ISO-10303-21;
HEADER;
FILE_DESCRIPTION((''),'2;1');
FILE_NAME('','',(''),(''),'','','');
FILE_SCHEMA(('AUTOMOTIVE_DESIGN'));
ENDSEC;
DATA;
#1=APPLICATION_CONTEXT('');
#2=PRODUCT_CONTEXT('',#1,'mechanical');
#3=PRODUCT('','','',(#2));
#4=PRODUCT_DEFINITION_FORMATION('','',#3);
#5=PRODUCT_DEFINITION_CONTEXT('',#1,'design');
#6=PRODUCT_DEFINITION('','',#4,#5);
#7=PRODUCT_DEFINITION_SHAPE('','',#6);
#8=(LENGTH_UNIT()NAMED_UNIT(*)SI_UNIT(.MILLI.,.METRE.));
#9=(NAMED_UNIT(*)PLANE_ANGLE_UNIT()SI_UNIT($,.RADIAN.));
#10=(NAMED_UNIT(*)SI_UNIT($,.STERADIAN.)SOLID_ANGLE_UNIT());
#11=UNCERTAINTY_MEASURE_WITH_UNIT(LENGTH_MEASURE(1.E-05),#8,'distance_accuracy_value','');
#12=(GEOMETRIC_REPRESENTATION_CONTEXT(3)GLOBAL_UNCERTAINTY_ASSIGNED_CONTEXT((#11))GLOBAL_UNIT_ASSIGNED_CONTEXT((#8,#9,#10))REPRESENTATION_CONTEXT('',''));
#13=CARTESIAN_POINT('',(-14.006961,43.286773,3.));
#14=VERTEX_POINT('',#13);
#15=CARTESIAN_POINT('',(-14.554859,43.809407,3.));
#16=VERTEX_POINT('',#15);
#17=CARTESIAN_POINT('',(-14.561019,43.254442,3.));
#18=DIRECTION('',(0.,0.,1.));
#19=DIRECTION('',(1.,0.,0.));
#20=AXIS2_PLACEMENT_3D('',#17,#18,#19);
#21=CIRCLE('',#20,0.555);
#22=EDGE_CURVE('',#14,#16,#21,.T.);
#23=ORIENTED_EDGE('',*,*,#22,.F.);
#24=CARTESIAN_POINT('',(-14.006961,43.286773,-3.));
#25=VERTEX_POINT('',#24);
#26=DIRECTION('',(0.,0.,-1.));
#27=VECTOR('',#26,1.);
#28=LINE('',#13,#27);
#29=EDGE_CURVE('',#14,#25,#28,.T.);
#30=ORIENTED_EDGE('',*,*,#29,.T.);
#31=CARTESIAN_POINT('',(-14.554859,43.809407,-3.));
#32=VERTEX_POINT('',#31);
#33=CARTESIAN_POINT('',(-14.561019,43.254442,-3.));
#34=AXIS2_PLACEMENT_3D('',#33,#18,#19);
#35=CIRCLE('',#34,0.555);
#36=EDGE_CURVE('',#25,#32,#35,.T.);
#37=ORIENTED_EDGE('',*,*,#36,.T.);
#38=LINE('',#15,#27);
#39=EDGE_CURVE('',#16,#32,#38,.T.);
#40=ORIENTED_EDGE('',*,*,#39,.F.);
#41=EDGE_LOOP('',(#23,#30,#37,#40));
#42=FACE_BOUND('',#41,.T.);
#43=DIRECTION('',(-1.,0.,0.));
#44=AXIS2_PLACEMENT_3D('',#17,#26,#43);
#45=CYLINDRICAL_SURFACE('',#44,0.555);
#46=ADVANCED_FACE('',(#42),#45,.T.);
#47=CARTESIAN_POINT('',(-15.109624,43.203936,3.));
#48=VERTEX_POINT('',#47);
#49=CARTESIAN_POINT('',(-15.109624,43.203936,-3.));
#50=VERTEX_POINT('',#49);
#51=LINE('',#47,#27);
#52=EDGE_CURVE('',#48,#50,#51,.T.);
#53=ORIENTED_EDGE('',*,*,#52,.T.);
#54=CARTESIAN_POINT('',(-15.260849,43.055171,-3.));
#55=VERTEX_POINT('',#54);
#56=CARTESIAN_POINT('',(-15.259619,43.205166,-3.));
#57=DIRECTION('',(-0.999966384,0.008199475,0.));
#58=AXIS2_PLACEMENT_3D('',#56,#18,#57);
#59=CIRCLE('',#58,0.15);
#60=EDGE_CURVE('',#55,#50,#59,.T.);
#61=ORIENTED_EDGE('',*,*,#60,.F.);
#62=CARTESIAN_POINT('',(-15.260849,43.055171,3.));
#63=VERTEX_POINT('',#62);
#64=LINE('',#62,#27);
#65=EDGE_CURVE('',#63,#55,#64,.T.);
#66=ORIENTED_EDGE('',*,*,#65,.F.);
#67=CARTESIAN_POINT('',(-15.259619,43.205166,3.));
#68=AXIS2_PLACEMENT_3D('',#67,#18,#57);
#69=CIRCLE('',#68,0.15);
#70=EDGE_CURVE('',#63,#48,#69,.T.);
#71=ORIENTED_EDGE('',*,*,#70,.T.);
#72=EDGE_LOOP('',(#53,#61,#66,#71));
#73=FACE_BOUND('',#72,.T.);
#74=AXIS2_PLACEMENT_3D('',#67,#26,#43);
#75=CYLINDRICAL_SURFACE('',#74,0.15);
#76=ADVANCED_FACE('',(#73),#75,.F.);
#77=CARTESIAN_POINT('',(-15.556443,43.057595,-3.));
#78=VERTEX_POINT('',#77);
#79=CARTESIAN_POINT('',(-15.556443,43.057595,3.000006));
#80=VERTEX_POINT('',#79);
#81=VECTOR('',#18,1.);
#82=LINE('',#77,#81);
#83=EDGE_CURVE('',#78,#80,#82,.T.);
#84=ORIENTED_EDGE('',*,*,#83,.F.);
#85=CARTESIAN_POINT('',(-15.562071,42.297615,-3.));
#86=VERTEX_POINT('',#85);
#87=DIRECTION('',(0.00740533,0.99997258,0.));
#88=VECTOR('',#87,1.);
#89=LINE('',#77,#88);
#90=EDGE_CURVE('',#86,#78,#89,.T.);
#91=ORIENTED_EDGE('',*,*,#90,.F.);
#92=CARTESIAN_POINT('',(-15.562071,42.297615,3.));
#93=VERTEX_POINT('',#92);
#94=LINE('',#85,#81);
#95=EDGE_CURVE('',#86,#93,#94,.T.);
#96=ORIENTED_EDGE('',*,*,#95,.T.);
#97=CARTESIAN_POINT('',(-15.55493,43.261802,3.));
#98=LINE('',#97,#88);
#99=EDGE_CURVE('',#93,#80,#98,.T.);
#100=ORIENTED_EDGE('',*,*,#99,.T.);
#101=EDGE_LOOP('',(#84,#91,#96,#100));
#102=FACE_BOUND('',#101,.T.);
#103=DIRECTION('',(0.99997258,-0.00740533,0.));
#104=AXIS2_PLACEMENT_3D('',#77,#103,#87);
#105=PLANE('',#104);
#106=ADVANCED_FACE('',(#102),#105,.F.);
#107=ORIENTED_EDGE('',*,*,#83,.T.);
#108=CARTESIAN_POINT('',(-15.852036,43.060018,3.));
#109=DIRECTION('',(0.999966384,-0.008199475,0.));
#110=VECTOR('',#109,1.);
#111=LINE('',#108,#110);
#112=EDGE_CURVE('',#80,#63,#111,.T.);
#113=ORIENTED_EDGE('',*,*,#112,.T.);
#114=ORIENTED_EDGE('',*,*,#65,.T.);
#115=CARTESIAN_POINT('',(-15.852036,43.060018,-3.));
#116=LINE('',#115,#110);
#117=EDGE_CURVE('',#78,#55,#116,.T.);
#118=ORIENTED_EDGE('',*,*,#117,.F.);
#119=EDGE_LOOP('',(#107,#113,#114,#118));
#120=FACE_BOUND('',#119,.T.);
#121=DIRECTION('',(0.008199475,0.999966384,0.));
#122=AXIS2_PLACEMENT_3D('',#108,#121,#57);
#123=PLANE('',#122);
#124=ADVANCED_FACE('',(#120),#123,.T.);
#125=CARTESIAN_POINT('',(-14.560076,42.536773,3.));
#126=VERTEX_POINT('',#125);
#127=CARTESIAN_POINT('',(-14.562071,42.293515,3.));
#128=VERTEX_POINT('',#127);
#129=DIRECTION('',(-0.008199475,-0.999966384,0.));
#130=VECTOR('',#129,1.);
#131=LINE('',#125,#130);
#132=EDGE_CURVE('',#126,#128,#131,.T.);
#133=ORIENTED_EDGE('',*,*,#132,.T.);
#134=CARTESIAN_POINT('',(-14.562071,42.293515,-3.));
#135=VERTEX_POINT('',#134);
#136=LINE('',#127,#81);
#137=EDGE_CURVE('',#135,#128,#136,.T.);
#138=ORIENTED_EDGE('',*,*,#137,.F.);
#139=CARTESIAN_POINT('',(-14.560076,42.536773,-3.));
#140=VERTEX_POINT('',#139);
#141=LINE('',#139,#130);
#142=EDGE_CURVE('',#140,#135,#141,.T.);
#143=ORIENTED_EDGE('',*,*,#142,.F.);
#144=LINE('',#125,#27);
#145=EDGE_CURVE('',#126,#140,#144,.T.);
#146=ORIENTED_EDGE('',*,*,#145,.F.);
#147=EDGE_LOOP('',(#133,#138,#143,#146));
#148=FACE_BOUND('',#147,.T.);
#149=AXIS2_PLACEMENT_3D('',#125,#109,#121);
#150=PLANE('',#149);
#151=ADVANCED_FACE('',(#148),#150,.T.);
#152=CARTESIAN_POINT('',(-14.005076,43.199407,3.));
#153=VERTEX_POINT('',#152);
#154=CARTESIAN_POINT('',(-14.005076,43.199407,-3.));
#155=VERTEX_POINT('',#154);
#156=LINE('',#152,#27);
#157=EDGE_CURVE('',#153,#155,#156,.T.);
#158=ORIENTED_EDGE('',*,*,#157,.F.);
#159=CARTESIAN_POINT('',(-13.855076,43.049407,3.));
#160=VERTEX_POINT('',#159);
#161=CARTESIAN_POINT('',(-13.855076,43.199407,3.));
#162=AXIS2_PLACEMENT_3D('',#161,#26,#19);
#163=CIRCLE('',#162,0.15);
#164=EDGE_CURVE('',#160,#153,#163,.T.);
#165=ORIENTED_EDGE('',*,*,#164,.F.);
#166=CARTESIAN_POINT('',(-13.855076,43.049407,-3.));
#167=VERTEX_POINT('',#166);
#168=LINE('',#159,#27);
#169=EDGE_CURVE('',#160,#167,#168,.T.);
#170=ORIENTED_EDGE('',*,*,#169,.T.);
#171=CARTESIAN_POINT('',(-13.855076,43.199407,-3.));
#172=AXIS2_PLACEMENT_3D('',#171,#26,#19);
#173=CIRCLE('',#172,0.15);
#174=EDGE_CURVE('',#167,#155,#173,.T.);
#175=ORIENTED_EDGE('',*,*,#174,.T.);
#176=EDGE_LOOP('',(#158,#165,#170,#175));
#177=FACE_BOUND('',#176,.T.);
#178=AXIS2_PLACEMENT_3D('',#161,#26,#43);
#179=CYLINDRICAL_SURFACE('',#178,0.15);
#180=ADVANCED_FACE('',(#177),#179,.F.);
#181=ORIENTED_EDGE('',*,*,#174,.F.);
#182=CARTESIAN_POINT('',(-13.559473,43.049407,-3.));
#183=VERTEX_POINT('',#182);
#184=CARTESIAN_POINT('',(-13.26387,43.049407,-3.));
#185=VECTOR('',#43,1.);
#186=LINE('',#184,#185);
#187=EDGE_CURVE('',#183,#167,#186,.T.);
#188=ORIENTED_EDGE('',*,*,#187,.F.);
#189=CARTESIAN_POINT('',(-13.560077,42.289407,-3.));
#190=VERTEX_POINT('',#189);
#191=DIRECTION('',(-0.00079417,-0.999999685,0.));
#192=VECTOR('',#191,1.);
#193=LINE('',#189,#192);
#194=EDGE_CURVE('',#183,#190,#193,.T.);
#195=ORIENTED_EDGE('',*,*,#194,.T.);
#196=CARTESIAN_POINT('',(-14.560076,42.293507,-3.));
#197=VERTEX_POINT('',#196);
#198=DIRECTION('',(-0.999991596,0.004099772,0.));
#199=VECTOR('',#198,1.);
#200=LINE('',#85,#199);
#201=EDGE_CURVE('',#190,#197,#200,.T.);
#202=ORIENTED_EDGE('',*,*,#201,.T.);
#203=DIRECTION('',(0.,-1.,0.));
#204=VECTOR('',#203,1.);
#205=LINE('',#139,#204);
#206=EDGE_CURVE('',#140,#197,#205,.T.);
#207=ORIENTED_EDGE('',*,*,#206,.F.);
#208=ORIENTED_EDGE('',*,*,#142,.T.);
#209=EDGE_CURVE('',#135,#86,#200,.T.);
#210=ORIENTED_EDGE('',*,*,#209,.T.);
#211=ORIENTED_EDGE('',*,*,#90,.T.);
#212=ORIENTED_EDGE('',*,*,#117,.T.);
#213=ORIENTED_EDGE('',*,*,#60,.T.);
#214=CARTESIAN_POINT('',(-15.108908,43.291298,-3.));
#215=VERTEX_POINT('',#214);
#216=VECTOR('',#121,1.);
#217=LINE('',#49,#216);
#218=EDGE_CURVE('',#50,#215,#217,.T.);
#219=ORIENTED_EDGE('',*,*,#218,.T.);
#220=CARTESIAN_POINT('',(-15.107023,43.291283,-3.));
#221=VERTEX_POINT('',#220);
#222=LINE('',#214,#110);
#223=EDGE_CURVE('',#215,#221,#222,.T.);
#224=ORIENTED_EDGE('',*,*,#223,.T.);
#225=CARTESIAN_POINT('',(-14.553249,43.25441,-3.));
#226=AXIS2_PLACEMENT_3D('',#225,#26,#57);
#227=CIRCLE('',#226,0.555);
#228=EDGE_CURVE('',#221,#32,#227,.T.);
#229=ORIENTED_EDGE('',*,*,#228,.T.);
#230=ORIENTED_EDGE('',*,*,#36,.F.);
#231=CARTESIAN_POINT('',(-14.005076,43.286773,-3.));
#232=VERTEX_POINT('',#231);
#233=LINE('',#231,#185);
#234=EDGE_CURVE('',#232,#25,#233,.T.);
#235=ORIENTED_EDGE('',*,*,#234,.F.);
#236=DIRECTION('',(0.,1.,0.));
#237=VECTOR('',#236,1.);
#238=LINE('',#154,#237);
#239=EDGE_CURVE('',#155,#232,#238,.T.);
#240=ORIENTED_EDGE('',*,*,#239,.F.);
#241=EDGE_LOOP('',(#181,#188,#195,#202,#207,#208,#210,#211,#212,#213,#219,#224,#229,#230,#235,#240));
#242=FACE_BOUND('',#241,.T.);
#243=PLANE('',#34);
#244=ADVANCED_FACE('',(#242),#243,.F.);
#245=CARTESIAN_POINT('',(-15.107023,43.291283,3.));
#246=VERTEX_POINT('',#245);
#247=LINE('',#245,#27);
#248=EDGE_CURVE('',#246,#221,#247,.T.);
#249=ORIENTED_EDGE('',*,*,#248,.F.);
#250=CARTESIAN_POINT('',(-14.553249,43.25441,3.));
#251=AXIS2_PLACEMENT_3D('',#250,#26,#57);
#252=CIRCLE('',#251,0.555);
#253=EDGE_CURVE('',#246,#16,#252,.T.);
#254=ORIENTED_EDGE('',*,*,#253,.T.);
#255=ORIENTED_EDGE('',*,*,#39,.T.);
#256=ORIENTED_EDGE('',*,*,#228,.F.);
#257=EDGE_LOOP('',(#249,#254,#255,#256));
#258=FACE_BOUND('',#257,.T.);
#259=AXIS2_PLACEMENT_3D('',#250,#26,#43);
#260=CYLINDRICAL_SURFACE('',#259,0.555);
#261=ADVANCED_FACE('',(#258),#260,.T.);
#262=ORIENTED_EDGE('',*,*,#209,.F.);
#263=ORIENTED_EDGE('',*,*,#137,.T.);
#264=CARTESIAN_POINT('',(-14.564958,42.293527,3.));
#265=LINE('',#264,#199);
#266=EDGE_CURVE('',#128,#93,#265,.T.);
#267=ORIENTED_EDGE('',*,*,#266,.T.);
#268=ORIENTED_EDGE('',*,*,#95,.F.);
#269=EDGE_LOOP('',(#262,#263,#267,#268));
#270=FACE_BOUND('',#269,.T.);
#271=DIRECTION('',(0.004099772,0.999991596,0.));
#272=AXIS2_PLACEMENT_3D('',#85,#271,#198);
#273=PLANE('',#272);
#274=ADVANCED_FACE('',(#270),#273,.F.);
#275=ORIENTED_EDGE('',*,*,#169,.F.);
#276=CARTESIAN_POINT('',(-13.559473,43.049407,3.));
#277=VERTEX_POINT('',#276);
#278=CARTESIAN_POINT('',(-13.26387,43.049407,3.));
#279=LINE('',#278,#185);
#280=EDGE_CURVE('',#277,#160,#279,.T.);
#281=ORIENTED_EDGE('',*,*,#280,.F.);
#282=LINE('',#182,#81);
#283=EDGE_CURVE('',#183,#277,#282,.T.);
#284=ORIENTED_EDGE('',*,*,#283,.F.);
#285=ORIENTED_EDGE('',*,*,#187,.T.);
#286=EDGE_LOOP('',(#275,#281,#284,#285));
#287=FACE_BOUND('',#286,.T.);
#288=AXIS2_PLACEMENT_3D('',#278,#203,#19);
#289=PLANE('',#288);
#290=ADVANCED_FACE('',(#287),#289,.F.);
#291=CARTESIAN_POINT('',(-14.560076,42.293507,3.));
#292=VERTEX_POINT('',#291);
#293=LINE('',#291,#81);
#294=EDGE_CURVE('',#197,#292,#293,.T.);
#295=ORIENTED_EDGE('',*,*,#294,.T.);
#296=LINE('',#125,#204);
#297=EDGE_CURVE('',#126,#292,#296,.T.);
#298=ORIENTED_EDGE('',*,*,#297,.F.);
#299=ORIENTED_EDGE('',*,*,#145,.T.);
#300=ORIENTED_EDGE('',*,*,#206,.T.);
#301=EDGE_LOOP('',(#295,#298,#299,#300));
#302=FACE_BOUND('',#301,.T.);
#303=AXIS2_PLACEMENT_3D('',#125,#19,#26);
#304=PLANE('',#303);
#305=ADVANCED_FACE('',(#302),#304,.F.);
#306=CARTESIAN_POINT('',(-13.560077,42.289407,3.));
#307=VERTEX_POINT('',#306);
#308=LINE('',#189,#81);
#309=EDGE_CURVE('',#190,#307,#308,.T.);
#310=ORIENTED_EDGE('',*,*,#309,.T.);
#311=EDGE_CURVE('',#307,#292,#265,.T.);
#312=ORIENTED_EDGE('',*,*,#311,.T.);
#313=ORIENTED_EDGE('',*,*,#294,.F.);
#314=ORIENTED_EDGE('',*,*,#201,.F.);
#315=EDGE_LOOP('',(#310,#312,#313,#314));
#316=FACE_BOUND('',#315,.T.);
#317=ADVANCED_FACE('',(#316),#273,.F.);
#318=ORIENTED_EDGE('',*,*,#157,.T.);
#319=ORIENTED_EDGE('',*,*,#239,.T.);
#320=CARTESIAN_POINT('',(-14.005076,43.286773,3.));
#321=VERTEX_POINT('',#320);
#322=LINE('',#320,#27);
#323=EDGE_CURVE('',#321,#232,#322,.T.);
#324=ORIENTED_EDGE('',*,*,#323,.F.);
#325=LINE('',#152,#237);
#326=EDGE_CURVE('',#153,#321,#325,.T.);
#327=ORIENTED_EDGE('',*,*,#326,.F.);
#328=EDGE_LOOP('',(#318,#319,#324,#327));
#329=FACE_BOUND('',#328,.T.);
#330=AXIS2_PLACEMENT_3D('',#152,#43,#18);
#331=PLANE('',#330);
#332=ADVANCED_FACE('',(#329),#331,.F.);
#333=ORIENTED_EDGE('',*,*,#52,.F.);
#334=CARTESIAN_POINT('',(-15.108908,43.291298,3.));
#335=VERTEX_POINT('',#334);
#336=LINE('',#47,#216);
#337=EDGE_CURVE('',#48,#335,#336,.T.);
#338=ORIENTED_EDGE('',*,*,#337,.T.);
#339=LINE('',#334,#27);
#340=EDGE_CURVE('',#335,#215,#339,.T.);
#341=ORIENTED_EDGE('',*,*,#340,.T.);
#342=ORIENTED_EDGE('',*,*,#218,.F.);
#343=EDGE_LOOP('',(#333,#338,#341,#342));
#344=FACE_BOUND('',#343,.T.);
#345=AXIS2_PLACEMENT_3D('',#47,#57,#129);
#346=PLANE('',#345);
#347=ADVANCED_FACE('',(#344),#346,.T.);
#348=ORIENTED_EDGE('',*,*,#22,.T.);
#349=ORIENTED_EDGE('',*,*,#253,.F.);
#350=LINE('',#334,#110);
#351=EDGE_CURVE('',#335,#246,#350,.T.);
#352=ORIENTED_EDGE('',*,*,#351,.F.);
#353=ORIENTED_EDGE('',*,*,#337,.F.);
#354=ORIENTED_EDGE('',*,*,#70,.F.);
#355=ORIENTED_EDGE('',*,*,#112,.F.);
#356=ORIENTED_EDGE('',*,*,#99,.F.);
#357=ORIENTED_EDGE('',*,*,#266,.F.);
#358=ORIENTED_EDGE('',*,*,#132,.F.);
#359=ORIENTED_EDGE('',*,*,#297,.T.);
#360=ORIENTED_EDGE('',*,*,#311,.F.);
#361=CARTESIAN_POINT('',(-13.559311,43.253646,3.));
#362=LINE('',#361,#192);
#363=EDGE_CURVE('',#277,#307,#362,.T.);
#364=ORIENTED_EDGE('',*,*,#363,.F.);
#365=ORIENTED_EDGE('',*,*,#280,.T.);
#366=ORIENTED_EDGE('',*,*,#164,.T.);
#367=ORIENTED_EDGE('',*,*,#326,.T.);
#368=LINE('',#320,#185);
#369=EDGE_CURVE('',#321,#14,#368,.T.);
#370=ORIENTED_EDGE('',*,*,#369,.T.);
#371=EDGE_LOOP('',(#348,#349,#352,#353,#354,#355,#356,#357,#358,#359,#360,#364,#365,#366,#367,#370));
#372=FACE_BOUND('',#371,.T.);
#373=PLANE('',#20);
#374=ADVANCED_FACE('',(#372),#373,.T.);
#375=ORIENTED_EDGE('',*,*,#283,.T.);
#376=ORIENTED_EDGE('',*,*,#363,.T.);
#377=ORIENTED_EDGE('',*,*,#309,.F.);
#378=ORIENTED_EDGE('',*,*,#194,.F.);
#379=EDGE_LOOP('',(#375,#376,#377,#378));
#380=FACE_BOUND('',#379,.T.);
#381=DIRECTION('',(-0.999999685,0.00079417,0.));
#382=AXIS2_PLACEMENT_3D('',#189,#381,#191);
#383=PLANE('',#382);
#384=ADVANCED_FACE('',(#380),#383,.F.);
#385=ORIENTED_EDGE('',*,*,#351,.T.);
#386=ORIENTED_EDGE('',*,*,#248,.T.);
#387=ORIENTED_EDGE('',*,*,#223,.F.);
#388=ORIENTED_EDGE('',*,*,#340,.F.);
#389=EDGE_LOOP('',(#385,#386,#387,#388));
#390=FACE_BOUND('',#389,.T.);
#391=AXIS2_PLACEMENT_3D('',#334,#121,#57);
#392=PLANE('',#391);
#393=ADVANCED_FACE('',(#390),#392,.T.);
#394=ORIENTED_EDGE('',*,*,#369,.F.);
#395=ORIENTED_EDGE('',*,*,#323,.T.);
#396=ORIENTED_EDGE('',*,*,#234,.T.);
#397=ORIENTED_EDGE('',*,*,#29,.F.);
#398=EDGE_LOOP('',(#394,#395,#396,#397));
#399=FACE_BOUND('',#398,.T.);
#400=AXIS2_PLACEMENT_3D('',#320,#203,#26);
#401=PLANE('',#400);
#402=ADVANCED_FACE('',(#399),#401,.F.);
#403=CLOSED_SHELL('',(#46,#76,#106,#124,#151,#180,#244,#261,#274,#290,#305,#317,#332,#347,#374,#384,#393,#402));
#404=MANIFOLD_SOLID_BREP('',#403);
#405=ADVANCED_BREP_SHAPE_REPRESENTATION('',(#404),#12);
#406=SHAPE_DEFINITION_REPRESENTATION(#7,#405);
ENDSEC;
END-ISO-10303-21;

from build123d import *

# Parameters (mm, degrees)
BOSS_EXTRUDE1_START     = -3
BOSS_EXTRUDE1_DEPTH     = 6
CUT_EXTRUDE1_DEPTH      = 48.233441213
CUT_EXTRUDE1_DEPTH_BACK = 48.233441213


# Read off the part's stored shape, not the designer's step: Boss-Extrude1
with BuildPart() as part:
    # Boss-Extrude1 outline → Boss-Extrude1 (new body)
    with BuildSketch(Plane.XY.offset(BOSS_EXTRUDE1_START)):
        with BuildLine():
            ThreePointArc((-14.00696142, 43.286772628), (-14.17794226, 43.656035086), (-14.554858855, 43.809407478))
            Line((-14.554858855, 43.809407478), (-14.560076412, 42.536772628))
            Line((-14.560076412, 42.536772628), (-14.560076412, 42.289407478))
            Line((-14.560076412, 42.289407478), (-12.560077389, 42.289407478))
            Line((-12.560077389, 42.289407478), (-12.560077389, 42.699408687))
            Line((-12.560077389, 42.699408687), (-12.561019893, 42.699407886))
            Line((-12.561019893, 42.699407886), (-12.561019893, 43.809407886))
            ThreePointArc((-12.561019893, 43.809407886), (-12.952915394, 43.647400147), (-13.116017726, 43.255958938))
            Line((-13.116017726, 43.255958938), (-13.116017726, 43.253512386))
            ThreePointArc((-13.116017726, 43.253512386), (-13.115577754, 43.232295081), (-13.11432695, 43.211110107))
            ThreePointArc((-13.11432695, 43.211110107), (-13.153744256, 43.09756294), (-13.263870251, 43.049407478))
            Line((-13.263870251, 43.049407478), (-13.855076412, 43.049407478))
            ThreePointArc((-13.855076412, 43.049407478), (-13.961142429, 43.093341461), (-14.005076412, 43.199407478))
            Line((-14.005076412, 43.199407478), (-14.005076412, 43.286772628))
            Line((-14.005076412, 43.286772628), (-14.00696142, 43.286772628))
        make_face()
    boss_extrude1 = extrude(amount=BOSS_EXTRUDE1_DEPTH)

    # Mirror1: Boss-Extrude1 across plane
    add(boss_extrude1.mirror(Plane(origin=(-14.554858855, 43.809407478, 3), x_dir=(0, 0, 1), z_dir=(0.999991595899715, -0.004099771937727064, 0))))

    # Sketch2 → Cut-Extrude1 (cut, two sides: drawn at the far end of the back side and taken through both)
    with BuildSketch(Plane.XY.offset(3).offset(-CUT_EXTRUDE1_DEPTH_BACK)):
        Polygon((-15.556442519, 43.057594665), (-15.562070571, 42.297615265), (-13.560076901, 42.289407478), (-13.559473332, 43.049407478), (-13.559473332, 43.956069089), (-12.181780454, 43.956069089), (-12.181780454, 41.780834702), (-16.94397701, 41.941153484), (-16.798232662, 44.196547263), (-15.556442519, 43.988861567), align=None)
    extrude(amount=CUT_EXTRUDE1_DEPTH + CUT_EXTRUDE1_DEPTH_BACK, mode=Mode.SUBTRACT)


solid = part.part
